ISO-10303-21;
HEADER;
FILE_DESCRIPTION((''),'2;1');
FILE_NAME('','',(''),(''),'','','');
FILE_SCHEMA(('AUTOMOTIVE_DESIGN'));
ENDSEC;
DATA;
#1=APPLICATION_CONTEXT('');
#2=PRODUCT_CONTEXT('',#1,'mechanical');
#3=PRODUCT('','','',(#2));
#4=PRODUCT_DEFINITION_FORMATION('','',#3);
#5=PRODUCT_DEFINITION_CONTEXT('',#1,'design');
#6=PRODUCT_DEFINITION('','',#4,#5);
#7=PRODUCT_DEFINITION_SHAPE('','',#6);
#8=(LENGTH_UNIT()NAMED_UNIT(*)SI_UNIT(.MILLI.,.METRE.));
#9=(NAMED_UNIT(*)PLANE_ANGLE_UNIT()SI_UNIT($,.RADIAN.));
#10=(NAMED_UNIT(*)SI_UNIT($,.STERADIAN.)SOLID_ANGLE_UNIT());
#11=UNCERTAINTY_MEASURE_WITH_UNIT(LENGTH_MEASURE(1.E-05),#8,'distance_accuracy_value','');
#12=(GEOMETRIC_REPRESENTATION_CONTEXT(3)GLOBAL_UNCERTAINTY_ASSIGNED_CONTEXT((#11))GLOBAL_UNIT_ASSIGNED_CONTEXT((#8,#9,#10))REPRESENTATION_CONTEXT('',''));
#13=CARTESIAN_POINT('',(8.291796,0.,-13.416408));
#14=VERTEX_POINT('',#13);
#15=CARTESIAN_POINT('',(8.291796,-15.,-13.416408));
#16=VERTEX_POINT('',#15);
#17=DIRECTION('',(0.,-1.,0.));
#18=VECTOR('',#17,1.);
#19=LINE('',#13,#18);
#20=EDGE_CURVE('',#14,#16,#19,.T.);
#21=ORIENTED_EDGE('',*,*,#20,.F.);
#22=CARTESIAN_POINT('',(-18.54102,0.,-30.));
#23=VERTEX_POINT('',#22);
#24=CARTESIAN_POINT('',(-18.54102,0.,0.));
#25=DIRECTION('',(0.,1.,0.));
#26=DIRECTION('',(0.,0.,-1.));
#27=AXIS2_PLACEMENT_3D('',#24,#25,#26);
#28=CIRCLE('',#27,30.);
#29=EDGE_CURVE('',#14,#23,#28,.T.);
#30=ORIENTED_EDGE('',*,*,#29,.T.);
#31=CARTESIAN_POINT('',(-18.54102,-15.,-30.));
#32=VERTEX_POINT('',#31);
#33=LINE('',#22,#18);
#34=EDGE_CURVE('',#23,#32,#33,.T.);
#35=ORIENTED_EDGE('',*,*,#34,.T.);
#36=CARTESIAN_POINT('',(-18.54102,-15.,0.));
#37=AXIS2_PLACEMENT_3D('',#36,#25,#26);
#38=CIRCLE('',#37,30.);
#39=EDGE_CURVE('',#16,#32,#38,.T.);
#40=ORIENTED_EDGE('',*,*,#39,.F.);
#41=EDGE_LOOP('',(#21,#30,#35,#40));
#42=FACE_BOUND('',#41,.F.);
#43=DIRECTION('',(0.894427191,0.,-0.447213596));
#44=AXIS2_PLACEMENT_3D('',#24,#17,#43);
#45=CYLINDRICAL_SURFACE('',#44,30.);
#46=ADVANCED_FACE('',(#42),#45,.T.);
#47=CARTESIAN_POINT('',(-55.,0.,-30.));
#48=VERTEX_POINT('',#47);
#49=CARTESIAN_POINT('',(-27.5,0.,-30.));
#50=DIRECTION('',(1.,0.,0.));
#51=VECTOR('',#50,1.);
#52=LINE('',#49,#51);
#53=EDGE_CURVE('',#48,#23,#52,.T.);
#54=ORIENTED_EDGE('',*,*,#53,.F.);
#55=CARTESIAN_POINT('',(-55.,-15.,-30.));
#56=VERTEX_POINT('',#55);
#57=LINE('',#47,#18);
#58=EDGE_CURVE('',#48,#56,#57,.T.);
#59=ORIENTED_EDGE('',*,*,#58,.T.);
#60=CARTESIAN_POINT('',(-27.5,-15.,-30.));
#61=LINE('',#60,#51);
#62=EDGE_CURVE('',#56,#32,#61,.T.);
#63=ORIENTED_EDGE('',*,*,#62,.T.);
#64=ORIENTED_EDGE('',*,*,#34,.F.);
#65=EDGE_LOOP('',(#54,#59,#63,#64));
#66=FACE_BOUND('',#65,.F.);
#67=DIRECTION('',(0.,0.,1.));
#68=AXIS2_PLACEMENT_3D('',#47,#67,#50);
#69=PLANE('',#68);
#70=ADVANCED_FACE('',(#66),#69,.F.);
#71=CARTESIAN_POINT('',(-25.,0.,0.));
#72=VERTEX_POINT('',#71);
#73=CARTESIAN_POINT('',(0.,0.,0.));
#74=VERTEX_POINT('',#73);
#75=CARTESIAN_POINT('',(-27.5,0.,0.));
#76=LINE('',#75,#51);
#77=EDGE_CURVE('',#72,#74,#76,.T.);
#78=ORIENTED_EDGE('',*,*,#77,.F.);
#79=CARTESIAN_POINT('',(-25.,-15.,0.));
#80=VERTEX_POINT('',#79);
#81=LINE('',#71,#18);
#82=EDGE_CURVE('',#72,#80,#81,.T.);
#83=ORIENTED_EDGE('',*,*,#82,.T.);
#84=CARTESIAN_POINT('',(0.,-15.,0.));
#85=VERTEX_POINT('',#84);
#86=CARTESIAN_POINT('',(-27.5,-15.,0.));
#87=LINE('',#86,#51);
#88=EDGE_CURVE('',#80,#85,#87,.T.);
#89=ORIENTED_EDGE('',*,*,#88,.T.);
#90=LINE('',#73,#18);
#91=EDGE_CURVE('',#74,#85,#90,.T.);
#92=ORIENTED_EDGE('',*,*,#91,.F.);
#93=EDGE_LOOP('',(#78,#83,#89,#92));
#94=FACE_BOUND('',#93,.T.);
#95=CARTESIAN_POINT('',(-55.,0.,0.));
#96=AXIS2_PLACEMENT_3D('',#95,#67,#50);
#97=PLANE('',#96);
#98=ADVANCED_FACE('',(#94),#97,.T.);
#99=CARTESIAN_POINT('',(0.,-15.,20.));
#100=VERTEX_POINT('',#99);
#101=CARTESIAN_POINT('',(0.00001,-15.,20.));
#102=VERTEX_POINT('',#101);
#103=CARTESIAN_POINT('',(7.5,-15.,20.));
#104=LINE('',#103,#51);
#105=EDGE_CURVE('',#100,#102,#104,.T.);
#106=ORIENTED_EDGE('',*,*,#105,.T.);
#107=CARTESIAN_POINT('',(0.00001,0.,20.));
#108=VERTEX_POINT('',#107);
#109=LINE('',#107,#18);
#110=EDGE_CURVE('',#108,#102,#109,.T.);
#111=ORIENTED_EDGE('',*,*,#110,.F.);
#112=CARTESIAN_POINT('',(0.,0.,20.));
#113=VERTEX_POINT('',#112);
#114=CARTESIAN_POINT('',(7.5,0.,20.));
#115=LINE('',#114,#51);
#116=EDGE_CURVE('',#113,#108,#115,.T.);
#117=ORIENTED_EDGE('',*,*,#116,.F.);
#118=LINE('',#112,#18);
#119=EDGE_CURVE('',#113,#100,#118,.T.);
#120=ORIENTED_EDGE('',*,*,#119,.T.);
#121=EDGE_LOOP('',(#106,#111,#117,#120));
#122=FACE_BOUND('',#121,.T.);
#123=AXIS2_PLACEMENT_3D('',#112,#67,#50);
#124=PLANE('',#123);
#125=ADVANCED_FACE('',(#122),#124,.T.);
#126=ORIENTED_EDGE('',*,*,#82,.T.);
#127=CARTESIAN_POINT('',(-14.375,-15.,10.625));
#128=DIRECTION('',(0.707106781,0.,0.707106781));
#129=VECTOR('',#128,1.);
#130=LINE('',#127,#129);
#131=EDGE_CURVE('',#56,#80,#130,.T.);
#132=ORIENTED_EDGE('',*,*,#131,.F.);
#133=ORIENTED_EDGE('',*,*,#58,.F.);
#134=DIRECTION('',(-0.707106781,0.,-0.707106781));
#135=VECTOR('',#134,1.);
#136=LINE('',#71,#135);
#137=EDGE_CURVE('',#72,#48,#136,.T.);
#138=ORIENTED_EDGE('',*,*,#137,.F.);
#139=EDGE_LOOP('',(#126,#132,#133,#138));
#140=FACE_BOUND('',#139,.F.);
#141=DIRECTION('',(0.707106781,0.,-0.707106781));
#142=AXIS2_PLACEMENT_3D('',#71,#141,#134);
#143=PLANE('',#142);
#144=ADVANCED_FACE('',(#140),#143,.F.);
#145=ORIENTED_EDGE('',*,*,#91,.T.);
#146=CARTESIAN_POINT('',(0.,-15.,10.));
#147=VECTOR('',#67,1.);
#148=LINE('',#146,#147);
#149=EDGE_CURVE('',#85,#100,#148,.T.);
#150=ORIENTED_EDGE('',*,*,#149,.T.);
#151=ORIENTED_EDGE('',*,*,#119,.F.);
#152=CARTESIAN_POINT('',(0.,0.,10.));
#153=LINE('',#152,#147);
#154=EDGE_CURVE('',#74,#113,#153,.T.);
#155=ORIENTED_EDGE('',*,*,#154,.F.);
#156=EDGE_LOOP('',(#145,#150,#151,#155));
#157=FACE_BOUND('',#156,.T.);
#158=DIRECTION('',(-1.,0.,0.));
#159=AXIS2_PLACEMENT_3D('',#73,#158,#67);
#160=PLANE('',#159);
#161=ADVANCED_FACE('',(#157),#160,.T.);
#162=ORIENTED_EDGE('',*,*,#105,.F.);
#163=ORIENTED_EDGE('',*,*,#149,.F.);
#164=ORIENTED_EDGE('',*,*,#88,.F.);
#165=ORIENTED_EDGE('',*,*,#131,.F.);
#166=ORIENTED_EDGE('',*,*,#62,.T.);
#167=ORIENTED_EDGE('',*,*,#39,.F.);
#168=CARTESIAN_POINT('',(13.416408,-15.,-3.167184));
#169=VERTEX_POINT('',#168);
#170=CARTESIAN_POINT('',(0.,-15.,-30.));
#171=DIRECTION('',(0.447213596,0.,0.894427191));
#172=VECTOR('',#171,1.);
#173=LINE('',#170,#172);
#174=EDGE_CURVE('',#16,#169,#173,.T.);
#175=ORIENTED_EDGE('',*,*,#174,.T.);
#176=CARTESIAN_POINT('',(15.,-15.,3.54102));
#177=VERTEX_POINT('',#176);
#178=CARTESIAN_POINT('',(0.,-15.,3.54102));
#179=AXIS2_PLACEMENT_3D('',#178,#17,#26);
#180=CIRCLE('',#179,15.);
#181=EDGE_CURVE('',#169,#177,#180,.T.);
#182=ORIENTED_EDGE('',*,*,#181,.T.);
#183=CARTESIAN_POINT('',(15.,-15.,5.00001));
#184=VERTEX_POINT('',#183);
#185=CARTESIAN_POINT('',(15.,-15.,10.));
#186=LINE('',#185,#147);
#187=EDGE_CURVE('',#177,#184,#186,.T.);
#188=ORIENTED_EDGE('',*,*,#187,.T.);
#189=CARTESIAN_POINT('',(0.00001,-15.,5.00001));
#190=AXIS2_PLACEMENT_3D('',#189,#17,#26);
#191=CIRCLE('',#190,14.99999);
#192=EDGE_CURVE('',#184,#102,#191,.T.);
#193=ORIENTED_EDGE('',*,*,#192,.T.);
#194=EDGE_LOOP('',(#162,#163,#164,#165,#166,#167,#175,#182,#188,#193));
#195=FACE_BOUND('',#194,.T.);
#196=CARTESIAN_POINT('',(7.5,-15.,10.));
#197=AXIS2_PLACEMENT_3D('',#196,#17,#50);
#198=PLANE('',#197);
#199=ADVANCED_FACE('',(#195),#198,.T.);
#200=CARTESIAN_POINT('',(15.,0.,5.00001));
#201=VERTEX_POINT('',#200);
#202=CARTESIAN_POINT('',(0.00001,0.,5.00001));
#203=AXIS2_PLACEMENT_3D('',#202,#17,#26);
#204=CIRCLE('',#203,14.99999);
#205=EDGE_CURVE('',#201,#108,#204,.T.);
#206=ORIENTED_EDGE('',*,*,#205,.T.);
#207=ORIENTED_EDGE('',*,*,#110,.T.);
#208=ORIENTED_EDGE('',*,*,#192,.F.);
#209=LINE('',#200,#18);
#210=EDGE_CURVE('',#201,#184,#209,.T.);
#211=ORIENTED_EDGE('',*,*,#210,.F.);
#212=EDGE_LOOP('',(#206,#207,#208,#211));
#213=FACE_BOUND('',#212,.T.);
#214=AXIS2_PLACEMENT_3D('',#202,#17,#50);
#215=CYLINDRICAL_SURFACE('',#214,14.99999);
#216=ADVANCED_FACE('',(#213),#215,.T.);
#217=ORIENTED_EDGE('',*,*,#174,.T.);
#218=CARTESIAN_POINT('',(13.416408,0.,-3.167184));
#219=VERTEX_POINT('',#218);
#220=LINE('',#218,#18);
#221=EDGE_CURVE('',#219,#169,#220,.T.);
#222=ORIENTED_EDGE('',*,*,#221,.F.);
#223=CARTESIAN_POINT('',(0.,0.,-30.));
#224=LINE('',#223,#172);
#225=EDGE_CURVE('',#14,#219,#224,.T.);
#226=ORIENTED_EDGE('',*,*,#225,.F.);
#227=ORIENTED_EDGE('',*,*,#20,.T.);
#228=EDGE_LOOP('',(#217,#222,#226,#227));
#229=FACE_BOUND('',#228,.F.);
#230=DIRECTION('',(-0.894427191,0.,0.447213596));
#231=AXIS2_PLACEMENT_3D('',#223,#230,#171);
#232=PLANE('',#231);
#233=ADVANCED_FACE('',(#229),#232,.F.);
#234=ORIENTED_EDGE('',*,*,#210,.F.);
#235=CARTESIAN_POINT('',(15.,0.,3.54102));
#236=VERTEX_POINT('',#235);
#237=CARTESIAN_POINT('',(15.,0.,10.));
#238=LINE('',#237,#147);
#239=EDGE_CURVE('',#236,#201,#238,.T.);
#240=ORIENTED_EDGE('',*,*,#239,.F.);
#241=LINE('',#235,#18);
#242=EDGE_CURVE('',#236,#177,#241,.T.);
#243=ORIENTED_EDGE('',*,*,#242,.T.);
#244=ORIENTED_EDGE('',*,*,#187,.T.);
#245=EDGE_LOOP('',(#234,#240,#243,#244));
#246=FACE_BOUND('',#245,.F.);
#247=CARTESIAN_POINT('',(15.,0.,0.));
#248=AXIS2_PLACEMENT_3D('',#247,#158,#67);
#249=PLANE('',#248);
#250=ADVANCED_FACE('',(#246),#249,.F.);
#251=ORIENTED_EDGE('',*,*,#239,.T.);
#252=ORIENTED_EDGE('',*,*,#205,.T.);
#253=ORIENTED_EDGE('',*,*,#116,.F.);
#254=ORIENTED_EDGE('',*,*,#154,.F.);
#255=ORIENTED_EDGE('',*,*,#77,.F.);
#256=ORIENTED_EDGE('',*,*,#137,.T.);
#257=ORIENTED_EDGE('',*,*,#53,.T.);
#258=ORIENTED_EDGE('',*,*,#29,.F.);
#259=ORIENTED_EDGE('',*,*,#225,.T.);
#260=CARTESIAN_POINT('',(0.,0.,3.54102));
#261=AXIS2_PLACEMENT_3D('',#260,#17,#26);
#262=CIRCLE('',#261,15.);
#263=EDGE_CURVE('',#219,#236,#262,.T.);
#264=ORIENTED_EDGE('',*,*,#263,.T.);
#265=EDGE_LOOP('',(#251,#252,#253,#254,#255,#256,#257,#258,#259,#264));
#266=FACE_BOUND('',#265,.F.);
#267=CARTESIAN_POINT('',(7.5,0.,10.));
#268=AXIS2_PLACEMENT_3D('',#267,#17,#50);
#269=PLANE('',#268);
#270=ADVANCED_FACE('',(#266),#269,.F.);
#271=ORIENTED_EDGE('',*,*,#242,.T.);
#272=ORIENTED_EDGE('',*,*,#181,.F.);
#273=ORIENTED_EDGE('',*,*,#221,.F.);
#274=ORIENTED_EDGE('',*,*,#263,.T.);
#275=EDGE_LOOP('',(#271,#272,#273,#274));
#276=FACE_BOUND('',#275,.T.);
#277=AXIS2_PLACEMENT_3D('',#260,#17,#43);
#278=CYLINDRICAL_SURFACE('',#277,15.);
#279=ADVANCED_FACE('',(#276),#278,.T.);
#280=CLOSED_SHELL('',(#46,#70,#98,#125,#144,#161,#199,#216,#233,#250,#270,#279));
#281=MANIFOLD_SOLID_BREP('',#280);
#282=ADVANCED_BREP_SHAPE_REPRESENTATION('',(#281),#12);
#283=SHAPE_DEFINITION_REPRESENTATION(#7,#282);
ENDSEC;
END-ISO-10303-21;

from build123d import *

# Parameters (mm, degrees)
F3_W     = 15
F3_H     = 20
F3_W_2   = 55
F3_H_2   = 30
F4_DEPTH = 15
F5_R     = 15
F6_R     = 30
F7_R     = 14.99999
F9_DEPTH = 15.001


# Not quite as in the source:
# - a fillet or chamfer is up to 0.001 mm smaller than in the source, because OpenCascade refuses the exact size


with BuildPart() as f4:
    # F3 (on Front) → F4 (new body)
    with BuildSketch(Plane.XZ):
        with Locations((7.5, 10)):
            Rectangle(F3_W, F3_H)
        with Locations((-27.5, -15)):
            Rectangle(F3_W_2, F3_H_2)
        Polygon((15, 0), (0, 0), (0, -30), align=None)
    extrude(amount=F4_DEPTH)

    # F5
    f5_edges = [f4.edges().sort_by_distance(p)[0] for p in [
        (15, -7.5, 0),
    ]]
    fillet(f5_edges, radius=F5_R)

    # F6
    f6_edges = [f4.edges().sort_by_distance(p)[0] for p in [
        (0, -7.5, -30),
    ]]
    fillet(f6_edges, radius=F6_R)

    # F7 (radius 15 in the source; OpenCascade refuses exactly that, so slightly less here)
    f7_edges = [f4.edges().sort_by_distance(p)[0] for p in [
        (15, -7.5, 20),
    ]]
    fillet(f7_edges, radius=F7_R)

    # F8 (on face) → F9 (cut, through all)
    with BuildSketch(Plane(origin=(0, 0, 0), x_dir=(-1, 0, 0), z_dir=(0, 1, 0))):
        Polygon((25, 0), (55, -30), (55, 0), align=None)
    extrude(amount=-F9_DEPTH, mode=Mode.SUBTRACT)


solid = f4.part
